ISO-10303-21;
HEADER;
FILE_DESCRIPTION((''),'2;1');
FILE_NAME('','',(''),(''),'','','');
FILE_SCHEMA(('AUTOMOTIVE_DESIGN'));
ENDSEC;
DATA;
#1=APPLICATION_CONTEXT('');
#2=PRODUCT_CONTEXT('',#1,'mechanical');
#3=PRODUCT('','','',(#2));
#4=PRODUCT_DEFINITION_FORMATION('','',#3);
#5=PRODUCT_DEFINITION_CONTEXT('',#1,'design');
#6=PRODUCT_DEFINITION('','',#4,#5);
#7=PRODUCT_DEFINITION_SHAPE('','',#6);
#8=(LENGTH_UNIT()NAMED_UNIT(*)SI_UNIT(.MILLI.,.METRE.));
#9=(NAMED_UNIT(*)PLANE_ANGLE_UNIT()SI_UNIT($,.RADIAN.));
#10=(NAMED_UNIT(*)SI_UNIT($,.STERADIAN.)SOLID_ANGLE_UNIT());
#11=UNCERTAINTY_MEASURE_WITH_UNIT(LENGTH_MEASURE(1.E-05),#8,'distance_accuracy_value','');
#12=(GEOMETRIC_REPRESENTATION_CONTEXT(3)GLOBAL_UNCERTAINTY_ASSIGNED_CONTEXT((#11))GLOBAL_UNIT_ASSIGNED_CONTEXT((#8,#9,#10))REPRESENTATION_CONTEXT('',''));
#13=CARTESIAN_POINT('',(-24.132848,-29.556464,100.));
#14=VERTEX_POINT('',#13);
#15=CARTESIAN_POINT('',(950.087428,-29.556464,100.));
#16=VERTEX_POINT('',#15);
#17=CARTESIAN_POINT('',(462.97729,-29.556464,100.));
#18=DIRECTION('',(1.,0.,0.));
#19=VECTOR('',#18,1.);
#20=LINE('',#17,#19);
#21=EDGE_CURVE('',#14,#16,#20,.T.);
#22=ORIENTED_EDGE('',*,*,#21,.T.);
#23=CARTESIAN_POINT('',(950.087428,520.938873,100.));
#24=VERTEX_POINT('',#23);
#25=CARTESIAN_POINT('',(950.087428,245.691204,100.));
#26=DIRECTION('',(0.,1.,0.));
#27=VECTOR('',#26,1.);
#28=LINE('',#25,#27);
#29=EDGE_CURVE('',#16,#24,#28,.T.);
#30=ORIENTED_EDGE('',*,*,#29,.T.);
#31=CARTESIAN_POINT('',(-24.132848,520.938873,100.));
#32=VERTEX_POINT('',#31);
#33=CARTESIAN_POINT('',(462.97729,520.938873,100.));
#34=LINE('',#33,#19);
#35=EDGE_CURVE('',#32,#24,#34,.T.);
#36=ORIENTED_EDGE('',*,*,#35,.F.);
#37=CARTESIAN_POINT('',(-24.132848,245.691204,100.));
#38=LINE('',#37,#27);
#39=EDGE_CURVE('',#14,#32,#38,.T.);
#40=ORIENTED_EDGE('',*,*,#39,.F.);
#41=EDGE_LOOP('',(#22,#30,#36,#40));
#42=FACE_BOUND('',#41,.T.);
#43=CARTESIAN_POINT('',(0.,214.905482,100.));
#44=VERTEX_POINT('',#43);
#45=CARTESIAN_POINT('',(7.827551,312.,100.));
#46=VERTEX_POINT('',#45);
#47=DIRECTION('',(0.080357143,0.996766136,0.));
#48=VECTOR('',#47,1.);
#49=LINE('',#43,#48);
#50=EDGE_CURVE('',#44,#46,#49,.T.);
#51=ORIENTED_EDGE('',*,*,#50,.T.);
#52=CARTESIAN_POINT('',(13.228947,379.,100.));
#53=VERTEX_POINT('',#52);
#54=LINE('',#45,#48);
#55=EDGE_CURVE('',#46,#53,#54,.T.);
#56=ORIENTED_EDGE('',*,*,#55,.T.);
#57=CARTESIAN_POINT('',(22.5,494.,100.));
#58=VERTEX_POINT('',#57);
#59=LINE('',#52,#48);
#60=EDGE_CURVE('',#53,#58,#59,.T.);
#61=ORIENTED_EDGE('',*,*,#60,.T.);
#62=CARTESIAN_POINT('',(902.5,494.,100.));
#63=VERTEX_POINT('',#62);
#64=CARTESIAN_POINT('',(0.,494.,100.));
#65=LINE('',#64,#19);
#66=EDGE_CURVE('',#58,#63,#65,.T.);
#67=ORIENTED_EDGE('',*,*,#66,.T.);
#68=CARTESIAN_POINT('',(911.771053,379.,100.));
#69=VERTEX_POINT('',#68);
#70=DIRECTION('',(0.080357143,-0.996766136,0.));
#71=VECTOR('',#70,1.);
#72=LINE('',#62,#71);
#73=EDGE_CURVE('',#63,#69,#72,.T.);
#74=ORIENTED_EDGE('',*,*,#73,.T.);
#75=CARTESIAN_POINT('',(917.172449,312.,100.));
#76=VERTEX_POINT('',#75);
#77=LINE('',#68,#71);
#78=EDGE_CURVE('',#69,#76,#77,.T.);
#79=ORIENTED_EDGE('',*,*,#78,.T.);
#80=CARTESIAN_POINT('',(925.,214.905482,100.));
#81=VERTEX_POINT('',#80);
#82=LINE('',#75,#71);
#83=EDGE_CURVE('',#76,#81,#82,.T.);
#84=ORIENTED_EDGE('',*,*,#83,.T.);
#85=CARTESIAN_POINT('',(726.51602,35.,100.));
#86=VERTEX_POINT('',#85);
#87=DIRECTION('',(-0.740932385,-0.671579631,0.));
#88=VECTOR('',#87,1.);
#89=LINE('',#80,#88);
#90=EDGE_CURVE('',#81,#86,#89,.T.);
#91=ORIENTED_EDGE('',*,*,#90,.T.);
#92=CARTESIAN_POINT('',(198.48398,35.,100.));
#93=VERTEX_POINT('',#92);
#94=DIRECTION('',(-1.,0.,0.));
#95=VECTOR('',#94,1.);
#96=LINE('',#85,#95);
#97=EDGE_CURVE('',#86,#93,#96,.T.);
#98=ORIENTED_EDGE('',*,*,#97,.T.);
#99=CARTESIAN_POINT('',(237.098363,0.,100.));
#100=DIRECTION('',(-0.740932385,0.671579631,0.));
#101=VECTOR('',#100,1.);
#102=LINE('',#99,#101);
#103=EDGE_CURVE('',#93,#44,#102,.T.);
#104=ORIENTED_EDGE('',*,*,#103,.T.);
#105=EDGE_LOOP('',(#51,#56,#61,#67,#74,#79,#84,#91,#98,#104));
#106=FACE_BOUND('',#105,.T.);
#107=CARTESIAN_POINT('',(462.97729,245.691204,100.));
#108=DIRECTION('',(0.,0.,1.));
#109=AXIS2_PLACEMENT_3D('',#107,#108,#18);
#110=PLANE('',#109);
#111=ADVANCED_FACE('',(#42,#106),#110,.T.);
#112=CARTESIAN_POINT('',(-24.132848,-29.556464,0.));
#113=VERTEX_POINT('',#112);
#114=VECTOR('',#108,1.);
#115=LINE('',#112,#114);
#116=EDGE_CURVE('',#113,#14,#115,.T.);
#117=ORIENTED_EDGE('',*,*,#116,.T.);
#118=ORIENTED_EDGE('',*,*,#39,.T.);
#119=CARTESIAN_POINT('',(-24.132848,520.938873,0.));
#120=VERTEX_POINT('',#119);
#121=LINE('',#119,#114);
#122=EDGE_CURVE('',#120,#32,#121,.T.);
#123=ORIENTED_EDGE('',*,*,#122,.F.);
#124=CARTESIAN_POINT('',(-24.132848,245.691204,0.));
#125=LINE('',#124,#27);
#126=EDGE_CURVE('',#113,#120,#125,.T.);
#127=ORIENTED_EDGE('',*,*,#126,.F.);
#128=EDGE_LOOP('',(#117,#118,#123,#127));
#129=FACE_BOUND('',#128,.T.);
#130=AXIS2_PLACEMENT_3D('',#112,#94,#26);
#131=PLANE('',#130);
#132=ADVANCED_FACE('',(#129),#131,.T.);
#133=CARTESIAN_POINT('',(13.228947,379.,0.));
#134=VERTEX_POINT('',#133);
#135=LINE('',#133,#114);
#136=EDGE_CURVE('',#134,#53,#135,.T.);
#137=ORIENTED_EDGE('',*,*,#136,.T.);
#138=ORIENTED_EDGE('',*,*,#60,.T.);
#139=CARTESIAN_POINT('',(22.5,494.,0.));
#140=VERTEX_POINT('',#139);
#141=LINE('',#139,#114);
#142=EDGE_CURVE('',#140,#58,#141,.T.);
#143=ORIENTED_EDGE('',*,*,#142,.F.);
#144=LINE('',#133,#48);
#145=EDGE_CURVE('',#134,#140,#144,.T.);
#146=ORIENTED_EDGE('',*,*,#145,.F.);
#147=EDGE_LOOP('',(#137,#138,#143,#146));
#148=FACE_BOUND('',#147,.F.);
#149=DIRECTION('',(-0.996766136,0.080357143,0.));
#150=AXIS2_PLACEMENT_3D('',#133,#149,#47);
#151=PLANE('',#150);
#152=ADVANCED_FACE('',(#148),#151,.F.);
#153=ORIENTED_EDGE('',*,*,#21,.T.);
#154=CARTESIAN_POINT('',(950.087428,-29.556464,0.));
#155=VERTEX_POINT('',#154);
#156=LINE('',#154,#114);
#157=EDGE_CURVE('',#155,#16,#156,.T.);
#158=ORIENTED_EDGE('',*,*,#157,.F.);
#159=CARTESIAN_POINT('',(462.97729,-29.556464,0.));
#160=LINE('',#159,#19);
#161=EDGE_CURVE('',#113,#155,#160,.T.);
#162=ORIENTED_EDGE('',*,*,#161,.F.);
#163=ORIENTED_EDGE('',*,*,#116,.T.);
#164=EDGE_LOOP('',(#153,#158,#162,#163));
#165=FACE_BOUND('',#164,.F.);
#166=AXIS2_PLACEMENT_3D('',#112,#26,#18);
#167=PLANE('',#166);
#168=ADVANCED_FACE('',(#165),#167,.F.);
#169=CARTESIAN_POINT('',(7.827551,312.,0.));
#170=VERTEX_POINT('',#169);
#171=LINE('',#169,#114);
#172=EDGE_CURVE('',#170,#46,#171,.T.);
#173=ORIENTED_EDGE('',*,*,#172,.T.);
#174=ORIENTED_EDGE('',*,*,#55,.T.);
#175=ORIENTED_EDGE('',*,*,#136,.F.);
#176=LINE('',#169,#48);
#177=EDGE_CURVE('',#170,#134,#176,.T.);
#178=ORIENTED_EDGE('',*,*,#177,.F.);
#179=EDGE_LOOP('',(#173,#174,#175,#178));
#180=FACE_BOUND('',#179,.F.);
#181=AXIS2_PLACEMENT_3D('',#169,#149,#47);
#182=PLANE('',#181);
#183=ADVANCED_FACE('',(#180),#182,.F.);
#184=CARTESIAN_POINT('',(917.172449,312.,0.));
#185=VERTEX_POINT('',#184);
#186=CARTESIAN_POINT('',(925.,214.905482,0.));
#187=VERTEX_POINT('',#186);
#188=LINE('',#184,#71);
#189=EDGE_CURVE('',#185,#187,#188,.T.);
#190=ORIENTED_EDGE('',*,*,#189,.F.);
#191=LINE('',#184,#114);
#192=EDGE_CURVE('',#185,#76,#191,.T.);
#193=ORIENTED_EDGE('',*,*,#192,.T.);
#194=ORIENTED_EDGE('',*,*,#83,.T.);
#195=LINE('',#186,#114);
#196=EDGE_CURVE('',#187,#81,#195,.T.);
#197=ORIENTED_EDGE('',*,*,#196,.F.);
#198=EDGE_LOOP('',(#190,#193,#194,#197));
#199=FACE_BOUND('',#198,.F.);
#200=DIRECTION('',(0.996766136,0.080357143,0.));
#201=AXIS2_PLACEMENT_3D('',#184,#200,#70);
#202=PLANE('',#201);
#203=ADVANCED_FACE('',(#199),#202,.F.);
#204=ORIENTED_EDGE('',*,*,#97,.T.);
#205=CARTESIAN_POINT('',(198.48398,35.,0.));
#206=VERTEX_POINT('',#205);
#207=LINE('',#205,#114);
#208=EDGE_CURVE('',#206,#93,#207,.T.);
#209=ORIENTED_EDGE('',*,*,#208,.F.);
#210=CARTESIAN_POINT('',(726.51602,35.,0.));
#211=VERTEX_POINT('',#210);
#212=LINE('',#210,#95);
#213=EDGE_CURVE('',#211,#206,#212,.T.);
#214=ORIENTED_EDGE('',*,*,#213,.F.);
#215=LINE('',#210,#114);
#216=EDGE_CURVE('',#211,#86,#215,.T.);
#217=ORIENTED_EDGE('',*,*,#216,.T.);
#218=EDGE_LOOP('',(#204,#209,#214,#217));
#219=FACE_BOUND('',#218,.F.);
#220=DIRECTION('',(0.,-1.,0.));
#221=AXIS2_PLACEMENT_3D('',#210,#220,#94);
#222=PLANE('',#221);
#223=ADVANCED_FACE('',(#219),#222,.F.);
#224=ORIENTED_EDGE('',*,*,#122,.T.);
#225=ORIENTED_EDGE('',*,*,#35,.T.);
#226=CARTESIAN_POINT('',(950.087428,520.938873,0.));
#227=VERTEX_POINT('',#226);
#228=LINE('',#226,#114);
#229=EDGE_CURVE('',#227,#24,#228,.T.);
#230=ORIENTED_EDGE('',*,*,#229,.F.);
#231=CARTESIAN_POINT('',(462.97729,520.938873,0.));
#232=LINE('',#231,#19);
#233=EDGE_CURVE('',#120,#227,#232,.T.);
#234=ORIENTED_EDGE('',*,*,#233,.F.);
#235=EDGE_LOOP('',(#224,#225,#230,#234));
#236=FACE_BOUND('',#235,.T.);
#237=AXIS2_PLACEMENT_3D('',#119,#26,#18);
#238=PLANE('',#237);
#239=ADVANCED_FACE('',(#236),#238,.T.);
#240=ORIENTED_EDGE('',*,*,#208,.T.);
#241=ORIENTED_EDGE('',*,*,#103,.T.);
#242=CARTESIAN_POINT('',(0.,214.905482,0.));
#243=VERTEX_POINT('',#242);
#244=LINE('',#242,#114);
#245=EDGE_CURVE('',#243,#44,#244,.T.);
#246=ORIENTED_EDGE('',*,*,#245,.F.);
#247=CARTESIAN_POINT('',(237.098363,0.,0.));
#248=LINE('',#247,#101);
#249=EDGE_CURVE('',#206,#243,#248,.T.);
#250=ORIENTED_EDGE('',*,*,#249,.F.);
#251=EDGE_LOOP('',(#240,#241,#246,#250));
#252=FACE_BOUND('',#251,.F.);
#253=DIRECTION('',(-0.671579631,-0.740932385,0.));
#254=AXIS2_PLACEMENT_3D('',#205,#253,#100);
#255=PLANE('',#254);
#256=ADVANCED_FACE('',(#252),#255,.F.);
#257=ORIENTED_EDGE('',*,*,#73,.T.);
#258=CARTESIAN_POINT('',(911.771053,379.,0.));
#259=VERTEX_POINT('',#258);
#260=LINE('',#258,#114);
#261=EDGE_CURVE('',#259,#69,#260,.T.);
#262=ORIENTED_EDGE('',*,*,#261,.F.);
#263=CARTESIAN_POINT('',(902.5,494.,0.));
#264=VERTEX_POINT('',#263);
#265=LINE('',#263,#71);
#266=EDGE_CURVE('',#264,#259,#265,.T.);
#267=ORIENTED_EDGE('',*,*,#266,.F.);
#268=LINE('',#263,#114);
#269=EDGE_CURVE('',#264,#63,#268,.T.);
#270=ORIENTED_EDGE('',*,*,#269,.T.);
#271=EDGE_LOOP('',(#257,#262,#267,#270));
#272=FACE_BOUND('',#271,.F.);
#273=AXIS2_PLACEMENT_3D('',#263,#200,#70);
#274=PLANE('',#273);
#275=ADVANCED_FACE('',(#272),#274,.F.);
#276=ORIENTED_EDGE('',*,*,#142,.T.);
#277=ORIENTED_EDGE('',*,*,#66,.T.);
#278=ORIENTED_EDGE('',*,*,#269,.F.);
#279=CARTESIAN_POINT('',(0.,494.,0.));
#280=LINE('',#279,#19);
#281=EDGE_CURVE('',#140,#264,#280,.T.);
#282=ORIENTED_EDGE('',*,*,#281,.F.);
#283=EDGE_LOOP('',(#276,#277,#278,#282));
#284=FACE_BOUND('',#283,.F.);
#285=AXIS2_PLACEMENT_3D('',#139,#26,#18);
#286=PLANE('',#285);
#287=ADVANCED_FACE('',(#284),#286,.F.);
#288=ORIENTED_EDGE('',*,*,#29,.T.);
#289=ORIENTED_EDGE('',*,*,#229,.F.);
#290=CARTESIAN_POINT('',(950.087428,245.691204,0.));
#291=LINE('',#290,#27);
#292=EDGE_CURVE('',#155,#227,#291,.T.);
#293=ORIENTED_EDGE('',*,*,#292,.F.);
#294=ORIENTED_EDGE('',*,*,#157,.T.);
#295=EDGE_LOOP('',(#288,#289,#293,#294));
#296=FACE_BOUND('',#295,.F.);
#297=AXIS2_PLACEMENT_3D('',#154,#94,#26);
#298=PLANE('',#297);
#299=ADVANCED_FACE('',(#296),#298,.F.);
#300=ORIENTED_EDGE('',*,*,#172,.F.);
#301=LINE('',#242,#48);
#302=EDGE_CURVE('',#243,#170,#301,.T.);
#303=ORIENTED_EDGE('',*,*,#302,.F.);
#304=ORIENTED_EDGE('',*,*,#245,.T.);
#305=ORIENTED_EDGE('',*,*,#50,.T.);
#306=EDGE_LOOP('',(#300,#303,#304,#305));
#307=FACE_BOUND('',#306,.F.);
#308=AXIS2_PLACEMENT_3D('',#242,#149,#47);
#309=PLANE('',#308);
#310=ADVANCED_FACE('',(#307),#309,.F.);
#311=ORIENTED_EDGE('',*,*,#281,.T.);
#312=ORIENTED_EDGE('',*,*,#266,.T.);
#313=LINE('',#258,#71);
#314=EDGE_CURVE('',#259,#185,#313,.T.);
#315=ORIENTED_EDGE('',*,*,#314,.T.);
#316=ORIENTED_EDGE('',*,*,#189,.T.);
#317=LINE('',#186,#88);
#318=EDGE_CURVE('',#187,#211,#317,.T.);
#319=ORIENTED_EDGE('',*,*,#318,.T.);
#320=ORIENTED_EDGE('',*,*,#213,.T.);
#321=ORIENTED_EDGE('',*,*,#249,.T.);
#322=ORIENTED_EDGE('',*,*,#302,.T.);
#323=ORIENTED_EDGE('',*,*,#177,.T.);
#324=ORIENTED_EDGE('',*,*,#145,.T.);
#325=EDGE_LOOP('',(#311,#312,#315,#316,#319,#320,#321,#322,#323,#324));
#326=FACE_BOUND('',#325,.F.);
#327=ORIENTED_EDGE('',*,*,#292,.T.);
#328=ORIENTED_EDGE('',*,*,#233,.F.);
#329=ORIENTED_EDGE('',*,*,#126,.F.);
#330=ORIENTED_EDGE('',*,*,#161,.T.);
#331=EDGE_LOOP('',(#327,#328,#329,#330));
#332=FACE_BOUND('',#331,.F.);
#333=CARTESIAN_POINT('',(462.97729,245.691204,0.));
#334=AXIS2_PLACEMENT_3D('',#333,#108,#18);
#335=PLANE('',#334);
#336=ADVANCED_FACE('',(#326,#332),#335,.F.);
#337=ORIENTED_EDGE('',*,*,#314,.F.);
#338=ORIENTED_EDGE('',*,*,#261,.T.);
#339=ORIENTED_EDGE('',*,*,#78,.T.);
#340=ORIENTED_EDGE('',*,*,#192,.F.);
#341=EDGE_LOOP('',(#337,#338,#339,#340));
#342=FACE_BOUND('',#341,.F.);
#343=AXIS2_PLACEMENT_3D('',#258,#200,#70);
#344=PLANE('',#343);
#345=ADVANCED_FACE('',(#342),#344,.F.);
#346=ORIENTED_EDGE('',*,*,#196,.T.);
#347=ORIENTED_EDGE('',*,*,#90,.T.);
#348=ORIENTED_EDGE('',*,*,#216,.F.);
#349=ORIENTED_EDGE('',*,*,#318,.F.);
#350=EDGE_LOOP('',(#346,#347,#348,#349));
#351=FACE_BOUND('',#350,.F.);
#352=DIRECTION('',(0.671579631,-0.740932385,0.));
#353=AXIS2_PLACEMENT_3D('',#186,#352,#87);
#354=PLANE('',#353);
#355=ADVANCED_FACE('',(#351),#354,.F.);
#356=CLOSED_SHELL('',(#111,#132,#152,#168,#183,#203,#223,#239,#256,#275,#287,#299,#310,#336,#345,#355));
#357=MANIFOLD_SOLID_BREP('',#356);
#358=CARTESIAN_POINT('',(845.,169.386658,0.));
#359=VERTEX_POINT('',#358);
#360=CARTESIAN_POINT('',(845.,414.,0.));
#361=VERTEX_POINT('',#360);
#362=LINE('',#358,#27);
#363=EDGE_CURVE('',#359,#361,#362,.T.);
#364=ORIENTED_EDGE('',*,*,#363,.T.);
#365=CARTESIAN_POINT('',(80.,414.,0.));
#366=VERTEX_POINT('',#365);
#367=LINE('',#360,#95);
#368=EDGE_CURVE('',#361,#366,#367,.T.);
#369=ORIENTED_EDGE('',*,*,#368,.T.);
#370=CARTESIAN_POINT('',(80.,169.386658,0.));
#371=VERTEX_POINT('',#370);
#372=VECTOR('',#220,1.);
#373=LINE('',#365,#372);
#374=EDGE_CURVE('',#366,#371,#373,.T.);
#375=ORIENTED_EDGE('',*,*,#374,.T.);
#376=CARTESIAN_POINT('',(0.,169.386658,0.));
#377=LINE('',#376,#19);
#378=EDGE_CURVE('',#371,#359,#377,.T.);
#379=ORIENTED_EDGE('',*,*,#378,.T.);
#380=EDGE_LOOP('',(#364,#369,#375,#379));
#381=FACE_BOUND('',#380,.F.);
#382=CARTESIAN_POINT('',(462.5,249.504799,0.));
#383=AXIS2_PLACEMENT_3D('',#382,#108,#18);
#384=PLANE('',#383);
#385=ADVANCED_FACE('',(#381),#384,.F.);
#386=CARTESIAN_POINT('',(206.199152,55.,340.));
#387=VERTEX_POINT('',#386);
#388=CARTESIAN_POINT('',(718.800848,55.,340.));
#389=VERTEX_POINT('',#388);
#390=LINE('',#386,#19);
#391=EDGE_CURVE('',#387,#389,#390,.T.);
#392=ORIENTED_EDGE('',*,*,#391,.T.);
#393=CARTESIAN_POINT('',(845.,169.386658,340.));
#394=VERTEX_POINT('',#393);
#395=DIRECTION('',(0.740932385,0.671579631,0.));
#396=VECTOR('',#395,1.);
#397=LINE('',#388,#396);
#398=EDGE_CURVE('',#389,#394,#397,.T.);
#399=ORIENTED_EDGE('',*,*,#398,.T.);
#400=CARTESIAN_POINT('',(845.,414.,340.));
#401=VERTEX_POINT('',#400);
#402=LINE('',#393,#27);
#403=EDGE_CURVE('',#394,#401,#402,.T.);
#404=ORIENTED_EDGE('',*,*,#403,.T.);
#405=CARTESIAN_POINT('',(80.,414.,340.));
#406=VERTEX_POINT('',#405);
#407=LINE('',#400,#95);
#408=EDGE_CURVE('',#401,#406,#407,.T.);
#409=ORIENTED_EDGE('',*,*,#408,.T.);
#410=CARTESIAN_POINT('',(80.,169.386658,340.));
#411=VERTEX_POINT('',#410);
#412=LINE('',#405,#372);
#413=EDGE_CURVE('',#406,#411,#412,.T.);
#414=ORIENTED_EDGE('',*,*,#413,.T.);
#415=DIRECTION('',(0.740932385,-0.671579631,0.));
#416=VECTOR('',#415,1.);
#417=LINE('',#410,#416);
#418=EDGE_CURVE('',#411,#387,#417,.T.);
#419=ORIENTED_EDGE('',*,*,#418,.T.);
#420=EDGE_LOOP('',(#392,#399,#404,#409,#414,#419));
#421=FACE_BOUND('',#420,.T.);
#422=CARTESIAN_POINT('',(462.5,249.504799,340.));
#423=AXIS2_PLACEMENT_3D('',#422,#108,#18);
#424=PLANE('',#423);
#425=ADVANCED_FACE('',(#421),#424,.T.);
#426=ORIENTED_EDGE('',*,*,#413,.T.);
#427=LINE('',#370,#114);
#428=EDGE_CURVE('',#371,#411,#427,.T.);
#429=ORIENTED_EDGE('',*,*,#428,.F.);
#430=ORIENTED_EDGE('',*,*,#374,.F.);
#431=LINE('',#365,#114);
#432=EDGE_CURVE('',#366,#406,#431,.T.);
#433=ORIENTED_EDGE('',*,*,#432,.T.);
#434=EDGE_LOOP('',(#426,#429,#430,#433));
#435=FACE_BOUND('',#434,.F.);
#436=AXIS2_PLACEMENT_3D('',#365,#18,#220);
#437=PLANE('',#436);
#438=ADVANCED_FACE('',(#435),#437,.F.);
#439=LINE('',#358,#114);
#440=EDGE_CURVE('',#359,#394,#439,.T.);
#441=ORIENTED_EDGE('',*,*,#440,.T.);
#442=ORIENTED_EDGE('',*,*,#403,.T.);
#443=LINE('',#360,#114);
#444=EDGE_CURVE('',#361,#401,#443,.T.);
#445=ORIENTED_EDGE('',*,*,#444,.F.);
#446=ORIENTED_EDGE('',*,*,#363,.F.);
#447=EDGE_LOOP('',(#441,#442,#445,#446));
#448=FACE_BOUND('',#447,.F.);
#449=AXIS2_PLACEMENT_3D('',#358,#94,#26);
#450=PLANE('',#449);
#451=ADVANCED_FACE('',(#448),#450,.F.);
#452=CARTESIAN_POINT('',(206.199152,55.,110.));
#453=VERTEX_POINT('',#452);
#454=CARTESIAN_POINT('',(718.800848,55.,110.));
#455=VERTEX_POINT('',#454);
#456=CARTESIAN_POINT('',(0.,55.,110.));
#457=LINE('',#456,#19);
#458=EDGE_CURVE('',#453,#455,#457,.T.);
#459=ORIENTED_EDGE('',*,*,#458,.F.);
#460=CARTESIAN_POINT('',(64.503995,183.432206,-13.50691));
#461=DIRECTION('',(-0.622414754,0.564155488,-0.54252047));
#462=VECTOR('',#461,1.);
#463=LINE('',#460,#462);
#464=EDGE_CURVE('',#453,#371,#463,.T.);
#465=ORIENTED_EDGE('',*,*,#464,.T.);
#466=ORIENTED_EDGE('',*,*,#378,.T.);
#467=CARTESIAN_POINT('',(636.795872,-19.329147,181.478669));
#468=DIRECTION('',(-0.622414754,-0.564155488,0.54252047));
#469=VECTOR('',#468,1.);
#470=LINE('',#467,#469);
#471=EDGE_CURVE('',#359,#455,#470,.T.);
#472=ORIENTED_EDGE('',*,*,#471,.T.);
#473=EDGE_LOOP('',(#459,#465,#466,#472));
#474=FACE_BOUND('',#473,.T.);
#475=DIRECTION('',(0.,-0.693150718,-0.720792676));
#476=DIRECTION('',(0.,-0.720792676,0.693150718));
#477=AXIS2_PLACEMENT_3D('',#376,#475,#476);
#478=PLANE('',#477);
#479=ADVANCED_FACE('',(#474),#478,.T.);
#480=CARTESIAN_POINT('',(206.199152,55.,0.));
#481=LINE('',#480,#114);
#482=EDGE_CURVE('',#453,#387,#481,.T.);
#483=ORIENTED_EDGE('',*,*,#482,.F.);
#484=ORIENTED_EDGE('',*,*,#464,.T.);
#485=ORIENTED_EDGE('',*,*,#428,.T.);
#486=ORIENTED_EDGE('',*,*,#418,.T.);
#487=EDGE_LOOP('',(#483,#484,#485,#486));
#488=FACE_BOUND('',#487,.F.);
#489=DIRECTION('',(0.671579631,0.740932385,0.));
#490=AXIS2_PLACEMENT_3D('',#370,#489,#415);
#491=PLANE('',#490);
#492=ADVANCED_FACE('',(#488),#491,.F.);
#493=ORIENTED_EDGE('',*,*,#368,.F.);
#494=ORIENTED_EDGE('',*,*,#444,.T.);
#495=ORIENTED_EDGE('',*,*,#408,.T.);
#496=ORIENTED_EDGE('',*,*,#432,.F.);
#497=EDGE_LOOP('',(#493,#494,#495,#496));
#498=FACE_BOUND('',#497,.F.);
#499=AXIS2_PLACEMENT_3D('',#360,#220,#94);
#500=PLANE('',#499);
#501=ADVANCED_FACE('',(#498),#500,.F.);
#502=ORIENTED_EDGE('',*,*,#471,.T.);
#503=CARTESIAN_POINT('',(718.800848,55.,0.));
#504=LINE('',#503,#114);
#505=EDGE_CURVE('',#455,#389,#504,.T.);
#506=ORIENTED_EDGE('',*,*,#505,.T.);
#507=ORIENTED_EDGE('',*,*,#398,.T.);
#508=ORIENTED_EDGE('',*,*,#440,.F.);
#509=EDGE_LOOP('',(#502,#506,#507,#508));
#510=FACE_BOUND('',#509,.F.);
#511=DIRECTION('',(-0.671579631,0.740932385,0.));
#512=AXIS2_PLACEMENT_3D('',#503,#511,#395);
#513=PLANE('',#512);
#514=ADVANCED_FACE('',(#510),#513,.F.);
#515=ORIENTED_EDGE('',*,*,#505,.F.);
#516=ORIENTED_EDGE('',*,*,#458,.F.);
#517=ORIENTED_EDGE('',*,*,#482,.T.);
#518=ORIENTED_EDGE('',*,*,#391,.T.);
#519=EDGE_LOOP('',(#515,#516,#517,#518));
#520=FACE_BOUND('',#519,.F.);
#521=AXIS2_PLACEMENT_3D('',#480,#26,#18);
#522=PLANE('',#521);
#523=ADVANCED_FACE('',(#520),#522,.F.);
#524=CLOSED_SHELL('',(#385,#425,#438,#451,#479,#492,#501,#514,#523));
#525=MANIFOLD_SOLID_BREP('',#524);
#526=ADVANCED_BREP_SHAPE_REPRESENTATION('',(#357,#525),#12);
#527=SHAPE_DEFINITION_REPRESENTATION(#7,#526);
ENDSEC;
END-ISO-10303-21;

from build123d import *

# Parameters (mm, degrees)
F0_W     = 974.2202758789
F0_H     = 550.4953376949
F1_DEPTH = 100
F3_DEPTH = 340
F5_DEPTH = 950.088428093


with BuildPart() as f1:
    # F0 (on Top) → F1 (new body)
    with BuildSketch(Plane.XY):
        with Locations((462.9772901535, 245.6912044436)):
            Rectangle(F0_W, F0_H)
        Polygon((237.0983631819, 0), (0, 0), (0, 35), (0, 214.90548196), (0, 312), (0, 379), (0, 494), (22.5, 494), (462.5, 494), (902.5, 494), (925, 494), (925, 379), (925, 312), (925, 214.90548196), (925, 35), (925, 0), (687.9016368181, 0), (462.5, 0), align=None, mode=Mode.SUBTRACT)
        Polygon((0, 494), (0, 379), (13.2289472464, 379), (22.5, 494), align=None)
        Polygon((902.5, 494), (911.7710527536, 379), (925, 379), (925, 494), align=None)
        Polygon((925, 214.90548196), (726.5160203865, 35), (925, 35), align=None)
        Polygon((726.5160203865, 35), (687.9016368181, 0), (925, 0), (925, 35), align=None)
        Polygon((0, 35), (0, 0), (237.0983631819, 0), (198.4839796135, 35), align=None)
        Polygon((0, 214.90548196), (0, 35), (198.4839796135, 35), align=None)
        Polygon((0, 379), (0, 312), (7.8275512942, 312), (13.2289472464, 379), align=None)
        Polygon((0, 312), (0, 214.90548196), (7.8275512942, 312), align=None)
        Polygon((917.1724487058, 312), (925, 214.90548196), (925, 312), align=None)
        Polygon((911.7710527536, 379), (917.1724487058, 312), (925, 312), (925, 379), align=None)
        Polygon((462.5, 35), (462.5, 0), (687.9016368181, 0), (726.5160203865, 35), align=None)
        Polygon((198.4839796135, 35), (237.0983631819, 0), (462.5, 0), (462.5, 35), align=None)
    extrude(amount=F1_DEPTH)


with BuildPart() as f3:
    # F2 (on Top) → F3 (new body)
    with BuildSketch(Plane.XY):
        Polygon((845, 414), (80, 414), (80, 169.3866584137), (206.1991515171, 55), (718.8008484829, 55), (845, 169.3866584137), align=None)
    extrude(amount=F3_DEPTH)

    # F4 (on Right) → F5 (cut, through all)
    with BuildSketch(Plane.YZ):
        Polygon((55, 0), (169.3866584137, 0), (55, 110), align=None)
    extrude(amount=F5_DEPTH, mode=Mode.SUBTRACT)


solid = Compound([f1.part, f3.part])
